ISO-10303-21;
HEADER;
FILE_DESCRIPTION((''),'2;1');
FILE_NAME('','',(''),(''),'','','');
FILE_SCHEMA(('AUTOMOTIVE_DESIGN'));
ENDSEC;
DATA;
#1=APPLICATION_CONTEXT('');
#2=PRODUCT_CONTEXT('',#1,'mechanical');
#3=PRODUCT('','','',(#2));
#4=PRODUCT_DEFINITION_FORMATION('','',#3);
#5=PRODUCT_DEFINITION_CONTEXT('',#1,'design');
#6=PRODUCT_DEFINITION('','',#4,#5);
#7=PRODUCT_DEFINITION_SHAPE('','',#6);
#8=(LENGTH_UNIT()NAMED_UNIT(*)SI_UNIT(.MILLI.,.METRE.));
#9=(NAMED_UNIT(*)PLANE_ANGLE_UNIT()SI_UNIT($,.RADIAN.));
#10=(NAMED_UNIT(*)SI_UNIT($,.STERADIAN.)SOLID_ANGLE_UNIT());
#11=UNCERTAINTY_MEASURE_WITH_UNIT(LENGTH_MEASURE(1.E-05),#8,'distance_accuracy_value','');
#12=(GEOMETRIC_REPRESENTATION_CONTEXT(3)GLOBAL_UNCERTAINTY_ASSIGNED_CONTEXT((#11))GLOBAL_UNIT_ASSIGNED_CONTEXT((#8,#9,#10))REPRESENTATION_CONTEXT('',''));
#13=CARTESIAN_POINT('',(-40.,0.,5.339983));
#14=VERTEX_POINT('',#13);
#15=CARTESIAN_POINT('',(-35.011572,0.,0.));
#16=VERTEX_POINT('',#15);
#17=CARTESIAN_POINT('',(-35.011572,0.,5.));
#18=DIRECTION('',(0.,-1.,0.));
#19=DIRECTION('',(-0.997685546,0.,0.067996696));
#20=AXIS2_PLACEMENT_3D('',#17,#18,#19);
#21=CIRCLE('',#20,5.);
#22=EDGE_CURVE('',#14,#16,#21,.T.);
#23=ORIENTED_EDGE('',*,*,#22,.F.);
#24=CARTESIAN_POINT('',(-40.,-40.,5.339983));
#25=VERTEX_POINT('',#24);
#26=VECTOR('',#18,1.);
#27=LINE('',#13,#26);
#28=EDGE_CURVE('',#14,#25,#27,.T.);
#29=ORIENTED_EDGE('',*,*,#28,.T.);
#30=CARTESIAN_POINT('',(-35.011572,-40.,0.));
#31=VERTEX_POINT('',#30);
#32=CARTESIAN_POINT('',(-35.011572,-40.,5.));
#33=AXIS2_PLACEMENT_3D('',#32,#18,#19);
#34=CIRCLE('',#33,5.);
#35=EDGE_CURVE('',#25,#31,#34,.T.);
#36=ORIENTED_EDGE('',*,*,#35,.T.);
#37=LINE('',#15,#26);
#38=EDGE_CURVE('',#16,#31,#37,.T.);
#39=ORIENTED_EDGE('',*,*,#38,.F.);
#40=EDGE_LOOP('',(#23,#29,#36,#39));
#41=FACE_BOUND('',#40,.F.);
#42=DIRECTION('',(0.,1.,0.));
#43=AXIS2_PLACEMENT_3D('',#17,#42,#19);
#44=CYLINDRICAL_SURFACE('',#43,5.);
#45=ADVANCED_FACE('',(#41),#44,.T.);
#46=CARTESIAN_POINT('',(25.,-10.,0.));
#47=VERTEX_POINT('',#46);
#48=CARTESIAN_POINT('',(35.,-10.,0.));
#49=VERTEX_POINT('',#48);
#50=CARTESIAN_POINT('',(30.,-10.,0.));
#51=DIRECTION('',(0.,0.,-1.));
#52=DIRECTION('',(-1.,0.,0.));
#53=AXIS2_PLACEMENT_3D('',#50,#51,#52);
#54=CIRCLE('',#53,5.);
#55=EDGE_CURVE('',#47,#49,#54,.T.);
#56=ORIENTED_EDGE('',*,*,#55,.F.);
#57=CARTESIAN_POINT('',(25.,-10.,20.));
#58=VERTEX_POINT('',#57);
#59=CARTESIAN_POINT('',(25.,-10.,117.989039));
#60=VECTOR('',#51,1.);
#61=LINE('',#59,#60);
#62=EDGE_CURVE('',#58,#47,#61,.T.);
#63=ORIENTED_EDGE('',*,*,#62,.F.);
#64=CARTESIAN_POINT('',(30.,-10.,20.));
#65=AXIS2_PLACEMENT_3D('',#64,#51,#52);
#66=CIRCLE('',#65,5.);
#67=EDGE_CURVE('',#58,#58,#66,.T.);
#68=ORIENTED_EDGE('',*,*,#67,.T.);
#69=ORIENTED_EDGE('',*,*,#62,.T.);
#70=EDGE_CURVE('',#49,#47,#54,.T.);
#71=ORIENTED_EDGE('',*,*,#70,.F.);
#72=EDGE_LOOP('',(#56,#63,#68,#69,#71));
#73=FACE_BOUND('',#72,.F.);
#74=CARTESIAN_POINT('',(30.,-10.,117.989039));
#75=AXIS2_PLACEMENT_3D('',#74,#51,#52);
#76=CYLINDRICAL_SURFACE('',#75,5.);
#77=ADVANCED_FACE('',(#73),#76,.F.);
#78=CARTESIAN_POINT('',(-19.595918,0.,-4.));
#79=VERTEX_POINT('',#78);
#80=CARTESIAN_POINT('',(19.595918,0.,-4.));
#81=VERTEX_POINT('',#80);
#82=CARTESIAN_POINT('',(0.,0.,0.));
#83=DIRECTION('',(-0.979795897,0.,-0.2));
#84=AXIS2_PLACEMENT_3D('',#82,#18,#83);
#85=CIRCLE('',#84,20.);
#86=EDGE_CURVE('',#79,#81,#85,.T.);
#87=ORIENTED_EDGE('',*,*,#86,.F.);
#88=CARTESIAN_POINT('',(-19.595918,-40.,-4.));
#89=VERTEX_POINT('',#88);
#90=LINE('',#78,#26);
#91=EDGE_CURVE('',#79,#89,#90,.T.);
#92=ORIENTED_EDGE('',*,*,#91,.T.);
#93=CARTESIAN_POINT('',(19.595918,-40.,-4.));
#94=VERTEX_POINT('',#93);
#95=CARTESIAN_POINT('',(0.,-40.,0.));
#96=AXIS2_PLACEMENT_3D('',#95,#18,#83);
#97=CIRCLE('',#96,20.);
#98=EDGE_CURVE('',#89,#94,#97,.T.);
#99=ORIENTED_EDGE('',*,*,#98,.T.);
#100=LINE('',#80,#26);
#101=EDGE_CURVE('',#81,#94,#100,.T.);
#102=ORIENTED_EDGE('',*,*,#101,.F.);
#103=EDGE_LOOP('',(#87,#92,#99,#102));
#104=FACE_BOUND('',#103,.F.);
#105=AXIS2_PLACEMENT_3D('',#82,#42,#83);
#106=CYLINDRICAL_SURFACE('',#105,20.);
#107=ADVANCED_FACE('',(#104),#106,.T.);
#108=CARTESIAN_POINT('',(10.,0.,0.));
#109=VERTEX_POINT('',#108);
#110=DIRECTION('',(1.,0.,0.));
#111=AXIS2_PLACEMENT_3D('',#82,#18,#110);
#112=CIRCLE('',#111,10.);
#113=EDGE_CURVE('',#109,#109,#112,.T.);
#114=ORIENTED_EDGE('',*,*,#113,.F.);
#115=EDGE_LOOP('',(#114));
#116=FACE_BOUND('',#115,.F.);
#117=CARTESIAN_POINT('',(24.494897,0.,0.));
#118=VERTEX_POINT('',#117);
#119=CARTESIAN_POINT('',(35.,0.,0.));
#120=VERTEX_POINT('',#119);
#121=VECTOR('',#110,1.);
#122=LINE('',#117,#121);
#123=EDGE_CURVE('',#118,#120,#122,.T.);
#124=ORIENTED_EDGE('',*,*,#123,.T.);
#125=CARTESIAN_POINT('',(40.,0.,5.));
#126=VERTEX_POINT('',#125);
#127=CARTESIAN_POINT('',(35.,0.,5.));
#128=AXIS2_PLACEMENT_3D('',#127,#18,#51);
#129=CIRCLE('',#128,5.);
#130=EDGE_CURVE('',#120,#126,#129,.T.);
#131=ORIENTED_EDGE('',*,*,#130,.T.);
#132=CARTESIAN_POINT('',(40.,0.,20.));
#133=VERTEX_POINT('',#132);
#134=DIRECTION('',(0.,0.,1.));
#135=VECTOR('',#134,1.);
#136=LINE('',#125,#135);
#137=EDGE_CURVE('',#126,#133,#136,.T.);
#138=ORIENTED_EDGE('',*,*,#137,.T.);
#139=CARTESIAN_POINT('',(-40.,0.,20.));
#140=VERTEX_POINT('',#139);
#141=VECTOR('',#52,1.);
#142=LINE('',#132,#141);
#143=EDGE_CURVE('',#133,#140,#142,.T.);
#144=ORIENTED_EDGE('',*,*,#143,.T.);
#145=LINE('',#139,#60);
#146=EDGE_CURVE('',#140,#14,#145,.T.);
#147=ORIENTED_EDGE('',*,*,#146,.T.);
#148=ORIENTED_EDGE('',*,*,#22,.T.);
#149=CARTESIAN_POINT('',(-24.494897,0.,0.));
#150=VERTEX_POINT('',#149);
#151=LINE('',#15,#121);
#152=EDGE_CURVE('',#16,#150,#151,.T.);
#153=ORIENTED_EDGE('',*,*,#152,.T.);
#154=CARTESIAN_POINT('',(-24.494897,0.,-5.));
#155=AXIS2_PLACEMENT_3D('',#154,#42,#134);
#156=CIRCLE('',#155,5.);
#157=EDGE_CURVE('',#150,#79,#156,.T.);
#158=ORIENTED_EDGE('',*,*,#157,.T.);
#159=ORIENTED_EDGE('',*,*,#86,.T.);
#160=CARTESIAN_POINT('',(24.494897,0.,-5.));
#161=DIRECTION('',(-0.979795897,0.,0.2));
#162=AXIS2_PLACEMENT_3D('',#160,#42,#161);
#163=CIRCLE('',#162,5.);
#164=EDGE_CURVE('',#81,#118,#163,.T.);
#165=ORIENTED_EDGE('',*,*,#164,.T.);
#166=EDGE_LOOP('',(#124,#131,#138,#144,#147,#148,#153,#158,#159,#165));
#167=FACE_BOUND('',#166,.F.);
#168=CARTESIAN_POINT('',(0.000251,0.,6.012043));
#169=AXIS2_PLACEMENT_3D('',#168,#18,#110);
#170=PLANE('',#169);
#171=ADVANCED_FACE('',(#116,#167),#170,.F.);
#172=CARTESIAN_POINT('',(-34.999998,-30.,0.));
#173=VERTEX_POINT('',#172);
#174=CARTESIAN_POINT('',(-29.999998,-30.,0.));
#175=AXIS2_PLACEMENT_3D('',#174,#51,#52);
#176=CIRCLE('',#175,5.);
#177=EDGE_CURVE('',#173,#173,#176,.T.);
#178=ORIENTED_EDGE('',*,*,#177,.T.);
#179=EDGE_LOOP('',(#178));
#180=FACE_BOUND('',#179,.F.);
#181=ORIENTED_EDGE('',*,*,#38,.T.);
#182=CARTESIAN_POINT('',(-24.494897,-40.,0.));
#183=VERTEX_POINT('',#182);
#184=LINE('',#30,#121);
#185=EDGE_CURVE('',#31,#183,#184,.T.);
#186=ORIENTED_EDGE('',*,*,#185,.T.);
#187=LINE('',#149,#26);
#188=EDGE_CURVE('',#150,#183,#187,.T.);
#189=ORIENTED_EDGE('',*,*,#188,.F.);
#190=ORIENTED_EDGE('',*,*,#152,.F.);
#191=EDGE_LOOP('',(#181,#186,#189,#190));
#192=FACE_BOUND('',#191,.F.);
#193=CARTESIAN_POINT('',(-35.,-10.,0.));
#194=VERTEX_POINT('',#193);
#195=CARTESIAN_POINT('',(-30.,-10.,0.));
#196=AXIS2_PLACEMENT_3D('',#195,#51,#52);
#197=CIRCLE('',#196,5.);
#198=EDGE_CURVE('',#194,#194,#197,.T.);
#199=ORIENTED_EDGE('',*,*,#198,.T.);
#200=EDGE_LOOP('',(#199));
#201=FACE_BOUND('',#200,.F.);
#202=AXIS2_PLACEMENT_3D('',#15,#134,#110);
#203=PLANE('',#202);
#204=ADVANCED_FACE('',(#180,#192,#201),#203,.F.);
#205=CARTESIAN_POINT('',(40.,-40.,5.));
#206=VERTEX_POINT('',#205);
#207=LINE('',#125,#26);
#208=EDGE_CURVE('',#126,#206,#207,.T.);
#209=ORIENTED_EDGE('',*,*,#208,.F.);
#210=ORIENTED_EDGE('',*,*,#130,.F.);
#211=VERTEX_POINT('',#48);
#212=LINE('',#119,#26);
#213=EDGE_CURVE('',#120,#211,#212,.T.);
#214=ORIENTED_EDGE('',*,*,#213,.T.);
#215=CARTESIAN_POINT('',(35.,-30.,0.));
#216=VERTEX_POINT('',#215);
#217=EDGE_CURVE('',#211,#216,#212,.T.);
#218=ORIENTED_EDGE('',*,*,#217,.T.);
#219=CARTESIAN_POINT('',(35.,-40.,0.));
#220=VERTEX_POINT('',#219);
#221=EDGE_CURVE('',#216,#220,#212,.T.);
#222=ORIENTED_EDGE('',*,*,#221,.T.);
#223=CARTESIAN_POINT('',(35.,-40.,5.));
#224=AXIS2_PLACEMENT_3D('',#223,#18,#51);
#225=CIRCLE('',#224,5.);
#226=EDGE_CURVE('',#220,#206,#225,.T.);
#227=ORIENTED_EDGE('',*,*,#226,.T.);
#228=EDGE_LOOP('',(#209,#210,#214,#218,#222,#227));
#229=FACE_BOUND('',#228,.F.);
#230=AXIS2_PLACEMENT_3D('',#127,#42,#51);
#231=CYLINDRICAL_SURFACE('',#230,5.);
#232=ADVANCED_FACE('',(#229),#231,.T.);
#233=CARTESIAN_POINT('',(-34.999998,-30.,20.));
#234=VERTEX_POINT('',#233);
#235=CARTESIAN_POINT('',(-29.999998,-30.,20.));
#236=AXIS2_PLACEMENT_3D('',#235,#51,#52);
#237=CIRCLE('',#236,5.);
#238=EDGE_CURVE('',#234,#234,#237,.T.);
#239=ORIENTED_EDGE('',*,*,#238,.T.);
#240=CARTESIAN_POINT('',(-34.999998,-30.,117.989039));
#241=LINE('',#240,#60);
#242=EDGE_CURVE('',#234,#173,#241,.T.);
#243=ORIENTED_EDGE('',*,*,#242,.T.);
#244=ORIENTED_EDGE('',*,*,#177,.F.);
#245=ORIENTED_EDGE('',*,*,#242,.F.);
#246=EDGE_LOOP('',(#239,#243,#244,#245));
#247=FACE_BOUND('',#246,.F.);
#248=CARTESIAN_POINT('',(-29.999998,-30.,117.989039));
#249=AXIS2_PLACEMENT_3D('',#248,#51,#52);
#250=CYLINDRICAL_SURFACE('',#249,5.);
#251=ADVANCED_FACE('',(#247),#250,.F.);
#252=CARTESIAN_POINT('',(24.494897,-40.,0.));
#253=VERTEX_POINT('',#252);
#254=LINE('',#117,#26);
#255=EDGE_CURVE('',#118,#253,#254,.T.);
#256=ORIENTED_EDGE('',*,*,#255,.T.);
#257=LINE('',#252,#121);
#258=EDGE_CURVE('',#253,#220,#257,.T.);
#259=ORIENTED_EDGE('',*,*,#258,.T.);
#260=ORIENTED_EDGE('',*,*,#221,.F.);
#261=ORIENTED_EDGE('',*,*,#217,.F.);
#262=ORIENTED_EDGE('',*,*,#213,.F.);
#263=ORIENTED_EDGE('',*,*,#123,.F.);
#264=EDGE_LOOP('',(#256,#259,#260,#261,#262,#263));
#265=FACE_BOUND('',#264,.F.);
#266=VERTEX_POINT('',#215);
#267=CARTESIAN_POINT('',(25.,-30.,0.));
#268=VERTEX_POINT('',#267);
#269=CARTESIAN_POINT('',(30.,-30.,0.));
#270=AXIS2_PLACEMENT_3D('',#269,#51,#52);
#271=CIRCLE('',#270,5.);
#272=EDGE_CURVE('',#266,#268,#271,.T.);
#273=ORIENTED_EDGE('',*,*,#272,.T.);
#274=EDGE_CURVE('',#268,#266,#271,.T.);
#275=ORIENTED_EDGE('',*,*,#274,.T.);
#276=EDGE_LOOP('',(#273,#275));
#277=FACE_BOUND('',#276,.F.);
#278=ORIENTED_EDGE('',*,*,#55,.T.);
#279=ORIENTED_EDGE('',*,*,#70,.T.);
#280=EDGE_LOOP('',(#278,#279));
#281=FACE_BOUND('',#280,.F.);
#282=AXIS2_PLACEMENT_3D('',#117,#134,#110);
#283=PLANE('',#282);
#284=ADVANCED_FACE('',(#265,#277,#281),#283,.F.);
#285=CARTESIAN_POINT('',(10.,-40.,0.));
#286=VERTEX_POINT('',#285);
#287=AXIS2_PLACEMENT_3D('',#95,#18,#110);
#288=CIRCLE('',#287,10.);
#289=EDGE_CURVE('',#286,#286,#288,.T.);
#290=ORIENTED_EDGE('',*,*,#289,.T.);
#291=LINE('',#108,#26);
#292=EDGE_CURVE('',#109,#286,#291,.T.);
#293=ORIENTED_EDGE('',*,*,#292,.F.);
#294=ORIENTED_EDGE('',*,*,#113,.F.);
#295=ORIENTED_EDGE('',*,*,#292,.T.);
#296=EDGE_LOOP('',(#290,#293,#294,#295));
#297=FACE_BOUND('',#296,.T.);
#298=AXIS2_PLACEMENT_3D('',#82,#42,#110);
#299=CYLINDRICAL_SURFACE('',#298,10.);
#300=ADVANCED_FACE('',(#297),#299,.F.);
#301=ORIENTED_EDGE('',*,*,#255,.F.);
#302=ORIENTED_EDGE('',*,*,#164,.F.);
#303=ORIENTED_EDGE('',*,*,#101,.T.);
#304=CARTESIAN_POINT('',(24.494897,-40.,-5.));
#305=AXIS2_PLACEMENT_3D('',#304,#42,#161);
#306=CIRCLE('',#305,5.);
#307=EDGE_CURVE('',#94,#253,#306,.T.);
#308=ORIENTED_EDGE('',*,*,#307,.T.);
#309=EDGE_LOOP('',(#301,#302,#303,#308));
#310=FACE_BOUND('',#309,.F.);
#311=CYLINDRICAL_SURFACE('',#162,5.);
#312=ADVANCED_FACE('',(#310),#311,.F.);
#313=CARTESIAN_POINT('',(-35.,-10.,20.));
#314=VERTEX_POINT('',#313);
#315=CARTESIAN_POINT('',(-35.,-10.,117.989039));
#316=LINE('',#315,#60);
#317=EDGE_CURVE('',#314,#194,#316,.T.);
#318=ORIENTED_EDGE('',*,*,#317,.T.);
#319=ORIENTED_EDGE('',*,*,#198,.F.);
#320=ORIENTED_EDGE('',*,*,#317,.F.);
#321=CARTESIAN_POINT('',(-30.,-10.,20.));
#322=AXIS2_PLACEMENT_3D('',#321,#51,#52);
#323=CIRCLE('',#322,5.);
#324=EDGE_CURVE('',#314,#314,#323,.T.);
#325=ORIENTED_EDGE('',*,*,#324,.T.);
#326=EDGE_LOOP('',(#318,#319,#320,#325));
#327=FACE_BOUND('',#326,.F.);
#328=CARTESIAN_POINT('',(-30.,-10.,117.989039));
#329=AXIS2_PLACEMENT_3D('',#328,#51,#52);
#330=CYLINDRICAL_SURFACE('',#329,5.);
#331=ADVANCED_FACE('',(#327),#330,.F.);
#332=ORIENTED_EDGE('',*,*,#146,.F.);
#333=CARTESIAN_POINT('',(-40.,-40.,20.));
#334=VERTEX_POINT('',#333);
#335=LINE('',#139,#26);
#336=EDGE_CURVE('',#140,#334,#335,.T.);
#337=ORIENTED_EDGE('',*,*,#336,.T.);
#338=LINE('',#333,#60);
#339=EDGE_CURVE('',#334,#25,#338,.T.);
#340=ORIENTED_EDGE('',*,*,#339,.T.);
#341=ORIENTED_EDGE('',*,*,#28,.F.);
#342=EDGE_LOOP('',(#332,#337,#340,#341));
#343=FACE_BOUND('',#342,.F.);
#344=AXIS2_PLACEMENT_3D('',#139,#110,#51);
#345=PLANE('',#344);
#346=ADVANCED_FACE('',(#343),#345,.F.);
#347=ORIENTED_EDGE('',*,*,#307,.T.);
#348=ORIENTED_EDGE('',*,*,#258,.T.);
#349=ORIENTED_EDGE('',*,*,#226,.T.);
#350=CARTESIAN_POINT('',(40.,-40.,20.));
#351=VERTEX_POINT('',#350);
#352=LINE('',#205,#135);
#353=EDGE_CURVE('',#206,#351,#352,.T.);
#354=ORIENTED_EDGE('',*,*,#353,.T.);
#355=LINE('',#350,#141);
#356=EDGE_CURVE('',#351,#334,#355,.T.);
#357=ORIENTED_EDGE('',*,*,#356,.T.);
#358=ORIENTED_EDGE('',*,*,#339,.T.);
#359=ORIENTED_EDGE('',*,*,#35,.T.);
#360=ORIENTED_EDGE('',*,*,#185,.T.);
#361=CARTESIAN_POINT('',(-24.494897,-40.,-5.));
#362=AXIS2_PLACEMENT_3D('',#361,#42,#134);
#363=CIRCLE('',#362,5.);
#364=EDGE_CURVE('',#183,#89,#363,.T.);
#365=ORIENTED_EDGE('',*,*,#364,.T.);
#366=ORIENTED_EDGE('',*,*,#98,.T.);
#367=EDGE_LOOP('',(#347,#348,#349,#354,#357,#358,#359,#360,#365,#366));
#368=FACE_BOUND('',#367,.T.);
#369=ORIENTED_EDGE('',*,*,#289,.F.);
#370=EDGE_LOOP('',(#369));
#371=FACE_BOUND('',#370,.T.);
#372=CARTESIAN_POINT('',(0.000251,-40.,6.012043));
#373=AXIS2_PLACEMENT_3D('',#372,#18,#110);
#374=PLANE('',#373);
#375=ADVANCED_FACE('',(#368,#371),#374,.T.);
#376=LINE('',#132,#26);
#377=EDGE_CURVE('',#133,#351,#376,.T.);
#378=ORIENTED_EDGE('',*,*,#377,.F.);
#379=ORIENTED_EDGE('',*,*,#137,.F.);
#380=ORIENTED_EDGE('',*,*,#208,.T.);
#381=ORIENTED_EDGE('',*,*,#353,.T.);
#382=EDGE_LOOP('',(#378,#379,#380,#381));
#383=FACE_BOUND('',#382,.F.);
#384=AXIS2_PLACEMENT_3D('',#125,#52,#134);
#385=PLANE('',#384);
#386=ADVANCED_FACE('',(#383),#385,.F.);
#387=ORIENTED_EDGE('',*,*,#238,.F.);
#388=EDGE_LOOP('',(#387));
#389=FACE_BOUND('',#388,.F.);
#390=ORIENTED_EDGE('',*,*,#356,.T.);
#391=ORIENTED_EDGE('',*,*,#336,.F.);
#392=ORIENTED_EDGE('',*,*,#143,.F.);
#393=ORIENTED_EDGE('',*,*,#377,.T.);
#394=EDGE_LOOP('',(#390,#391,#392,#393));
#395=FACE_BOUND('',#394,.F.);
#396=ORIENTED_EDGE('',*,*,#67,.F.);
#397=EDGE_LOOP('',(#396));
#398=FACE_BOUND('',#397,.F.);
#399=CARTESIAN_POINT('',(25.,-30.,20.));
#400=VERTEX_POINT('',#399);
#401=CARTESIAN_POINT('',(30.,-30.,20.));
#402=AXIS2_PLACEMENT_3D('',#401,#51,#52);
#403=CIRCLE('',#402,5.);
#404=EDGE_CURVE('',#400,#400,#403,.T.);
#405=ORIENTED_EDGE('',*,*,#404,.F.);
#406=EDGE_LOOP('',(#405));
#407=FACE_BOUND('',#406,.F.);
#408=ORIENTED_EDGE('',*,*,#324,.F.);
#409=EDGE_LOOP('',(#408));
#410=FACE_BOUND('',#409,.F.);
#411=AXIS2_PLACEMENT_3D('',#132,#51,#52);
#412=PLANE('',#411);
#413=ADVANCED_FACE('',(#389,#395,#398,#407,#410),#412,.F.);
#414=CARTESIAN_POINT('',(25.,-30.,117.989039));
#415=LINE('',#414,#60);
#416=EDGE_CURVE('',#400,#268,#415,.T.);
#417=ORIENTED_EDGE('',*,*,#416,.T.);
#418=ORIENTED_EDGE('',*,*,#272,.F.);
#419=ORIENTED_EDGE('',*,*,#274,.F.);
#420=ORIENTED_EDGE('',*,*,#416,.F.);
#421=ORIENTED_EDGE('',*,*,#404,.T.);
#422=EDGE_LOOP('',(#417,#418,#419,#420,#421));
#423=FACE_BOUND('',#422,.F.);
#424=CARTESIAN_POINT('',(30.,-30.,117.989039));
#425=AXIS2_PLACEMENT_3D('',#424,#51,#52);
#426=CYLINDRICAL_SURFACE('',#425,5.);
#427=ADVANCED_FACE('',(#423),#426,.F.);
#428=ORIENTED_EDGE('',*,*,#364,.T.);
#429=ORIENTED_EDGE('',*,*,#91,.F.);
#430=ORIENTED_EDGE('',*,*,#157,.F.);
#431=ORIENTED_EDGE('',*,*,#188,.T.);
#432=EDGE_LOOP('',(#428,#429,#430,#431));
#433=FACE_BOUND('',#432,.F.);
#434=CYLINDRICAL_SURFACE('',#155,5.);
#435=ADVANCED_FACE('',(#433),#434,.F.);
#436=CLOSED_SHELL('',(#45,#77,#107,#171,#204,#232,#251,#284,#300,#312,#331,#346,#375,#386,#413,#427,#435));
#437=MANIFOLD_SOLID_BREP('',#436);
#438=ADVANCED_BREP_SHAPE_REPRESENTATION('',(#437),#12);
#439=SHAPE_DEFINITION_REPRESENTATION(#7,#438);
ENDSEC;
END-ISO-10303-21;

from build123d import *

# Parameters (mm, degrees)
F0_R     = 10
F1_DEPTH = 40
F3_D     = 10


# Not quite as in the source:
# - a feature names something its author has since deleted; it is built from what else it names


with BuildPart() as f1:
    # F0 (on Front) → F1 (new body)
    with BuildSketch(Plane.XZ):
        with BuildLine():
            ThreePointArc((-24.4948974278, 0), (-21.3326197677, -1.1270166538), (-19.5959179423, -4))
            ThreePointArc((-19.5959179423, -4), (0, -20), (19.5959179423, -4))
            ThreePointArc((19.5959179423, -4), (21.3326197677, -1.1270166538), (24.4948974278, 0))
            Line((24.4948974278, 0), (35, 0))
            ThreePointArc((35, 0), (38.5355339059, 1.4644660941), (40, 5))
            Line((40, 5), (40, 20))
            Line((40, 20), (-40, 20))
            Line((-40, 20), (-40, 5.3399834782))
            ThreePointArc((-40, 5.3399834782), (-38.6653317972, 1.5867843161), (-35.0115722683, 0))
            Line((-35.0115722683, 0), (-24.4948974278, 0))
        make_face()
        Circle(F0_R, mode=Mode.SUBTRACT)
    extrude(amount=F1_DEPTH)

    # F3 (through all)
    with Locations(Plane.XY.offset(20)):
        with Locations((-30, -10), (-29.9999981744, -30), (30, -30), (30, -10)):
            Hole(F3_D / 2)


solid = f1.part
